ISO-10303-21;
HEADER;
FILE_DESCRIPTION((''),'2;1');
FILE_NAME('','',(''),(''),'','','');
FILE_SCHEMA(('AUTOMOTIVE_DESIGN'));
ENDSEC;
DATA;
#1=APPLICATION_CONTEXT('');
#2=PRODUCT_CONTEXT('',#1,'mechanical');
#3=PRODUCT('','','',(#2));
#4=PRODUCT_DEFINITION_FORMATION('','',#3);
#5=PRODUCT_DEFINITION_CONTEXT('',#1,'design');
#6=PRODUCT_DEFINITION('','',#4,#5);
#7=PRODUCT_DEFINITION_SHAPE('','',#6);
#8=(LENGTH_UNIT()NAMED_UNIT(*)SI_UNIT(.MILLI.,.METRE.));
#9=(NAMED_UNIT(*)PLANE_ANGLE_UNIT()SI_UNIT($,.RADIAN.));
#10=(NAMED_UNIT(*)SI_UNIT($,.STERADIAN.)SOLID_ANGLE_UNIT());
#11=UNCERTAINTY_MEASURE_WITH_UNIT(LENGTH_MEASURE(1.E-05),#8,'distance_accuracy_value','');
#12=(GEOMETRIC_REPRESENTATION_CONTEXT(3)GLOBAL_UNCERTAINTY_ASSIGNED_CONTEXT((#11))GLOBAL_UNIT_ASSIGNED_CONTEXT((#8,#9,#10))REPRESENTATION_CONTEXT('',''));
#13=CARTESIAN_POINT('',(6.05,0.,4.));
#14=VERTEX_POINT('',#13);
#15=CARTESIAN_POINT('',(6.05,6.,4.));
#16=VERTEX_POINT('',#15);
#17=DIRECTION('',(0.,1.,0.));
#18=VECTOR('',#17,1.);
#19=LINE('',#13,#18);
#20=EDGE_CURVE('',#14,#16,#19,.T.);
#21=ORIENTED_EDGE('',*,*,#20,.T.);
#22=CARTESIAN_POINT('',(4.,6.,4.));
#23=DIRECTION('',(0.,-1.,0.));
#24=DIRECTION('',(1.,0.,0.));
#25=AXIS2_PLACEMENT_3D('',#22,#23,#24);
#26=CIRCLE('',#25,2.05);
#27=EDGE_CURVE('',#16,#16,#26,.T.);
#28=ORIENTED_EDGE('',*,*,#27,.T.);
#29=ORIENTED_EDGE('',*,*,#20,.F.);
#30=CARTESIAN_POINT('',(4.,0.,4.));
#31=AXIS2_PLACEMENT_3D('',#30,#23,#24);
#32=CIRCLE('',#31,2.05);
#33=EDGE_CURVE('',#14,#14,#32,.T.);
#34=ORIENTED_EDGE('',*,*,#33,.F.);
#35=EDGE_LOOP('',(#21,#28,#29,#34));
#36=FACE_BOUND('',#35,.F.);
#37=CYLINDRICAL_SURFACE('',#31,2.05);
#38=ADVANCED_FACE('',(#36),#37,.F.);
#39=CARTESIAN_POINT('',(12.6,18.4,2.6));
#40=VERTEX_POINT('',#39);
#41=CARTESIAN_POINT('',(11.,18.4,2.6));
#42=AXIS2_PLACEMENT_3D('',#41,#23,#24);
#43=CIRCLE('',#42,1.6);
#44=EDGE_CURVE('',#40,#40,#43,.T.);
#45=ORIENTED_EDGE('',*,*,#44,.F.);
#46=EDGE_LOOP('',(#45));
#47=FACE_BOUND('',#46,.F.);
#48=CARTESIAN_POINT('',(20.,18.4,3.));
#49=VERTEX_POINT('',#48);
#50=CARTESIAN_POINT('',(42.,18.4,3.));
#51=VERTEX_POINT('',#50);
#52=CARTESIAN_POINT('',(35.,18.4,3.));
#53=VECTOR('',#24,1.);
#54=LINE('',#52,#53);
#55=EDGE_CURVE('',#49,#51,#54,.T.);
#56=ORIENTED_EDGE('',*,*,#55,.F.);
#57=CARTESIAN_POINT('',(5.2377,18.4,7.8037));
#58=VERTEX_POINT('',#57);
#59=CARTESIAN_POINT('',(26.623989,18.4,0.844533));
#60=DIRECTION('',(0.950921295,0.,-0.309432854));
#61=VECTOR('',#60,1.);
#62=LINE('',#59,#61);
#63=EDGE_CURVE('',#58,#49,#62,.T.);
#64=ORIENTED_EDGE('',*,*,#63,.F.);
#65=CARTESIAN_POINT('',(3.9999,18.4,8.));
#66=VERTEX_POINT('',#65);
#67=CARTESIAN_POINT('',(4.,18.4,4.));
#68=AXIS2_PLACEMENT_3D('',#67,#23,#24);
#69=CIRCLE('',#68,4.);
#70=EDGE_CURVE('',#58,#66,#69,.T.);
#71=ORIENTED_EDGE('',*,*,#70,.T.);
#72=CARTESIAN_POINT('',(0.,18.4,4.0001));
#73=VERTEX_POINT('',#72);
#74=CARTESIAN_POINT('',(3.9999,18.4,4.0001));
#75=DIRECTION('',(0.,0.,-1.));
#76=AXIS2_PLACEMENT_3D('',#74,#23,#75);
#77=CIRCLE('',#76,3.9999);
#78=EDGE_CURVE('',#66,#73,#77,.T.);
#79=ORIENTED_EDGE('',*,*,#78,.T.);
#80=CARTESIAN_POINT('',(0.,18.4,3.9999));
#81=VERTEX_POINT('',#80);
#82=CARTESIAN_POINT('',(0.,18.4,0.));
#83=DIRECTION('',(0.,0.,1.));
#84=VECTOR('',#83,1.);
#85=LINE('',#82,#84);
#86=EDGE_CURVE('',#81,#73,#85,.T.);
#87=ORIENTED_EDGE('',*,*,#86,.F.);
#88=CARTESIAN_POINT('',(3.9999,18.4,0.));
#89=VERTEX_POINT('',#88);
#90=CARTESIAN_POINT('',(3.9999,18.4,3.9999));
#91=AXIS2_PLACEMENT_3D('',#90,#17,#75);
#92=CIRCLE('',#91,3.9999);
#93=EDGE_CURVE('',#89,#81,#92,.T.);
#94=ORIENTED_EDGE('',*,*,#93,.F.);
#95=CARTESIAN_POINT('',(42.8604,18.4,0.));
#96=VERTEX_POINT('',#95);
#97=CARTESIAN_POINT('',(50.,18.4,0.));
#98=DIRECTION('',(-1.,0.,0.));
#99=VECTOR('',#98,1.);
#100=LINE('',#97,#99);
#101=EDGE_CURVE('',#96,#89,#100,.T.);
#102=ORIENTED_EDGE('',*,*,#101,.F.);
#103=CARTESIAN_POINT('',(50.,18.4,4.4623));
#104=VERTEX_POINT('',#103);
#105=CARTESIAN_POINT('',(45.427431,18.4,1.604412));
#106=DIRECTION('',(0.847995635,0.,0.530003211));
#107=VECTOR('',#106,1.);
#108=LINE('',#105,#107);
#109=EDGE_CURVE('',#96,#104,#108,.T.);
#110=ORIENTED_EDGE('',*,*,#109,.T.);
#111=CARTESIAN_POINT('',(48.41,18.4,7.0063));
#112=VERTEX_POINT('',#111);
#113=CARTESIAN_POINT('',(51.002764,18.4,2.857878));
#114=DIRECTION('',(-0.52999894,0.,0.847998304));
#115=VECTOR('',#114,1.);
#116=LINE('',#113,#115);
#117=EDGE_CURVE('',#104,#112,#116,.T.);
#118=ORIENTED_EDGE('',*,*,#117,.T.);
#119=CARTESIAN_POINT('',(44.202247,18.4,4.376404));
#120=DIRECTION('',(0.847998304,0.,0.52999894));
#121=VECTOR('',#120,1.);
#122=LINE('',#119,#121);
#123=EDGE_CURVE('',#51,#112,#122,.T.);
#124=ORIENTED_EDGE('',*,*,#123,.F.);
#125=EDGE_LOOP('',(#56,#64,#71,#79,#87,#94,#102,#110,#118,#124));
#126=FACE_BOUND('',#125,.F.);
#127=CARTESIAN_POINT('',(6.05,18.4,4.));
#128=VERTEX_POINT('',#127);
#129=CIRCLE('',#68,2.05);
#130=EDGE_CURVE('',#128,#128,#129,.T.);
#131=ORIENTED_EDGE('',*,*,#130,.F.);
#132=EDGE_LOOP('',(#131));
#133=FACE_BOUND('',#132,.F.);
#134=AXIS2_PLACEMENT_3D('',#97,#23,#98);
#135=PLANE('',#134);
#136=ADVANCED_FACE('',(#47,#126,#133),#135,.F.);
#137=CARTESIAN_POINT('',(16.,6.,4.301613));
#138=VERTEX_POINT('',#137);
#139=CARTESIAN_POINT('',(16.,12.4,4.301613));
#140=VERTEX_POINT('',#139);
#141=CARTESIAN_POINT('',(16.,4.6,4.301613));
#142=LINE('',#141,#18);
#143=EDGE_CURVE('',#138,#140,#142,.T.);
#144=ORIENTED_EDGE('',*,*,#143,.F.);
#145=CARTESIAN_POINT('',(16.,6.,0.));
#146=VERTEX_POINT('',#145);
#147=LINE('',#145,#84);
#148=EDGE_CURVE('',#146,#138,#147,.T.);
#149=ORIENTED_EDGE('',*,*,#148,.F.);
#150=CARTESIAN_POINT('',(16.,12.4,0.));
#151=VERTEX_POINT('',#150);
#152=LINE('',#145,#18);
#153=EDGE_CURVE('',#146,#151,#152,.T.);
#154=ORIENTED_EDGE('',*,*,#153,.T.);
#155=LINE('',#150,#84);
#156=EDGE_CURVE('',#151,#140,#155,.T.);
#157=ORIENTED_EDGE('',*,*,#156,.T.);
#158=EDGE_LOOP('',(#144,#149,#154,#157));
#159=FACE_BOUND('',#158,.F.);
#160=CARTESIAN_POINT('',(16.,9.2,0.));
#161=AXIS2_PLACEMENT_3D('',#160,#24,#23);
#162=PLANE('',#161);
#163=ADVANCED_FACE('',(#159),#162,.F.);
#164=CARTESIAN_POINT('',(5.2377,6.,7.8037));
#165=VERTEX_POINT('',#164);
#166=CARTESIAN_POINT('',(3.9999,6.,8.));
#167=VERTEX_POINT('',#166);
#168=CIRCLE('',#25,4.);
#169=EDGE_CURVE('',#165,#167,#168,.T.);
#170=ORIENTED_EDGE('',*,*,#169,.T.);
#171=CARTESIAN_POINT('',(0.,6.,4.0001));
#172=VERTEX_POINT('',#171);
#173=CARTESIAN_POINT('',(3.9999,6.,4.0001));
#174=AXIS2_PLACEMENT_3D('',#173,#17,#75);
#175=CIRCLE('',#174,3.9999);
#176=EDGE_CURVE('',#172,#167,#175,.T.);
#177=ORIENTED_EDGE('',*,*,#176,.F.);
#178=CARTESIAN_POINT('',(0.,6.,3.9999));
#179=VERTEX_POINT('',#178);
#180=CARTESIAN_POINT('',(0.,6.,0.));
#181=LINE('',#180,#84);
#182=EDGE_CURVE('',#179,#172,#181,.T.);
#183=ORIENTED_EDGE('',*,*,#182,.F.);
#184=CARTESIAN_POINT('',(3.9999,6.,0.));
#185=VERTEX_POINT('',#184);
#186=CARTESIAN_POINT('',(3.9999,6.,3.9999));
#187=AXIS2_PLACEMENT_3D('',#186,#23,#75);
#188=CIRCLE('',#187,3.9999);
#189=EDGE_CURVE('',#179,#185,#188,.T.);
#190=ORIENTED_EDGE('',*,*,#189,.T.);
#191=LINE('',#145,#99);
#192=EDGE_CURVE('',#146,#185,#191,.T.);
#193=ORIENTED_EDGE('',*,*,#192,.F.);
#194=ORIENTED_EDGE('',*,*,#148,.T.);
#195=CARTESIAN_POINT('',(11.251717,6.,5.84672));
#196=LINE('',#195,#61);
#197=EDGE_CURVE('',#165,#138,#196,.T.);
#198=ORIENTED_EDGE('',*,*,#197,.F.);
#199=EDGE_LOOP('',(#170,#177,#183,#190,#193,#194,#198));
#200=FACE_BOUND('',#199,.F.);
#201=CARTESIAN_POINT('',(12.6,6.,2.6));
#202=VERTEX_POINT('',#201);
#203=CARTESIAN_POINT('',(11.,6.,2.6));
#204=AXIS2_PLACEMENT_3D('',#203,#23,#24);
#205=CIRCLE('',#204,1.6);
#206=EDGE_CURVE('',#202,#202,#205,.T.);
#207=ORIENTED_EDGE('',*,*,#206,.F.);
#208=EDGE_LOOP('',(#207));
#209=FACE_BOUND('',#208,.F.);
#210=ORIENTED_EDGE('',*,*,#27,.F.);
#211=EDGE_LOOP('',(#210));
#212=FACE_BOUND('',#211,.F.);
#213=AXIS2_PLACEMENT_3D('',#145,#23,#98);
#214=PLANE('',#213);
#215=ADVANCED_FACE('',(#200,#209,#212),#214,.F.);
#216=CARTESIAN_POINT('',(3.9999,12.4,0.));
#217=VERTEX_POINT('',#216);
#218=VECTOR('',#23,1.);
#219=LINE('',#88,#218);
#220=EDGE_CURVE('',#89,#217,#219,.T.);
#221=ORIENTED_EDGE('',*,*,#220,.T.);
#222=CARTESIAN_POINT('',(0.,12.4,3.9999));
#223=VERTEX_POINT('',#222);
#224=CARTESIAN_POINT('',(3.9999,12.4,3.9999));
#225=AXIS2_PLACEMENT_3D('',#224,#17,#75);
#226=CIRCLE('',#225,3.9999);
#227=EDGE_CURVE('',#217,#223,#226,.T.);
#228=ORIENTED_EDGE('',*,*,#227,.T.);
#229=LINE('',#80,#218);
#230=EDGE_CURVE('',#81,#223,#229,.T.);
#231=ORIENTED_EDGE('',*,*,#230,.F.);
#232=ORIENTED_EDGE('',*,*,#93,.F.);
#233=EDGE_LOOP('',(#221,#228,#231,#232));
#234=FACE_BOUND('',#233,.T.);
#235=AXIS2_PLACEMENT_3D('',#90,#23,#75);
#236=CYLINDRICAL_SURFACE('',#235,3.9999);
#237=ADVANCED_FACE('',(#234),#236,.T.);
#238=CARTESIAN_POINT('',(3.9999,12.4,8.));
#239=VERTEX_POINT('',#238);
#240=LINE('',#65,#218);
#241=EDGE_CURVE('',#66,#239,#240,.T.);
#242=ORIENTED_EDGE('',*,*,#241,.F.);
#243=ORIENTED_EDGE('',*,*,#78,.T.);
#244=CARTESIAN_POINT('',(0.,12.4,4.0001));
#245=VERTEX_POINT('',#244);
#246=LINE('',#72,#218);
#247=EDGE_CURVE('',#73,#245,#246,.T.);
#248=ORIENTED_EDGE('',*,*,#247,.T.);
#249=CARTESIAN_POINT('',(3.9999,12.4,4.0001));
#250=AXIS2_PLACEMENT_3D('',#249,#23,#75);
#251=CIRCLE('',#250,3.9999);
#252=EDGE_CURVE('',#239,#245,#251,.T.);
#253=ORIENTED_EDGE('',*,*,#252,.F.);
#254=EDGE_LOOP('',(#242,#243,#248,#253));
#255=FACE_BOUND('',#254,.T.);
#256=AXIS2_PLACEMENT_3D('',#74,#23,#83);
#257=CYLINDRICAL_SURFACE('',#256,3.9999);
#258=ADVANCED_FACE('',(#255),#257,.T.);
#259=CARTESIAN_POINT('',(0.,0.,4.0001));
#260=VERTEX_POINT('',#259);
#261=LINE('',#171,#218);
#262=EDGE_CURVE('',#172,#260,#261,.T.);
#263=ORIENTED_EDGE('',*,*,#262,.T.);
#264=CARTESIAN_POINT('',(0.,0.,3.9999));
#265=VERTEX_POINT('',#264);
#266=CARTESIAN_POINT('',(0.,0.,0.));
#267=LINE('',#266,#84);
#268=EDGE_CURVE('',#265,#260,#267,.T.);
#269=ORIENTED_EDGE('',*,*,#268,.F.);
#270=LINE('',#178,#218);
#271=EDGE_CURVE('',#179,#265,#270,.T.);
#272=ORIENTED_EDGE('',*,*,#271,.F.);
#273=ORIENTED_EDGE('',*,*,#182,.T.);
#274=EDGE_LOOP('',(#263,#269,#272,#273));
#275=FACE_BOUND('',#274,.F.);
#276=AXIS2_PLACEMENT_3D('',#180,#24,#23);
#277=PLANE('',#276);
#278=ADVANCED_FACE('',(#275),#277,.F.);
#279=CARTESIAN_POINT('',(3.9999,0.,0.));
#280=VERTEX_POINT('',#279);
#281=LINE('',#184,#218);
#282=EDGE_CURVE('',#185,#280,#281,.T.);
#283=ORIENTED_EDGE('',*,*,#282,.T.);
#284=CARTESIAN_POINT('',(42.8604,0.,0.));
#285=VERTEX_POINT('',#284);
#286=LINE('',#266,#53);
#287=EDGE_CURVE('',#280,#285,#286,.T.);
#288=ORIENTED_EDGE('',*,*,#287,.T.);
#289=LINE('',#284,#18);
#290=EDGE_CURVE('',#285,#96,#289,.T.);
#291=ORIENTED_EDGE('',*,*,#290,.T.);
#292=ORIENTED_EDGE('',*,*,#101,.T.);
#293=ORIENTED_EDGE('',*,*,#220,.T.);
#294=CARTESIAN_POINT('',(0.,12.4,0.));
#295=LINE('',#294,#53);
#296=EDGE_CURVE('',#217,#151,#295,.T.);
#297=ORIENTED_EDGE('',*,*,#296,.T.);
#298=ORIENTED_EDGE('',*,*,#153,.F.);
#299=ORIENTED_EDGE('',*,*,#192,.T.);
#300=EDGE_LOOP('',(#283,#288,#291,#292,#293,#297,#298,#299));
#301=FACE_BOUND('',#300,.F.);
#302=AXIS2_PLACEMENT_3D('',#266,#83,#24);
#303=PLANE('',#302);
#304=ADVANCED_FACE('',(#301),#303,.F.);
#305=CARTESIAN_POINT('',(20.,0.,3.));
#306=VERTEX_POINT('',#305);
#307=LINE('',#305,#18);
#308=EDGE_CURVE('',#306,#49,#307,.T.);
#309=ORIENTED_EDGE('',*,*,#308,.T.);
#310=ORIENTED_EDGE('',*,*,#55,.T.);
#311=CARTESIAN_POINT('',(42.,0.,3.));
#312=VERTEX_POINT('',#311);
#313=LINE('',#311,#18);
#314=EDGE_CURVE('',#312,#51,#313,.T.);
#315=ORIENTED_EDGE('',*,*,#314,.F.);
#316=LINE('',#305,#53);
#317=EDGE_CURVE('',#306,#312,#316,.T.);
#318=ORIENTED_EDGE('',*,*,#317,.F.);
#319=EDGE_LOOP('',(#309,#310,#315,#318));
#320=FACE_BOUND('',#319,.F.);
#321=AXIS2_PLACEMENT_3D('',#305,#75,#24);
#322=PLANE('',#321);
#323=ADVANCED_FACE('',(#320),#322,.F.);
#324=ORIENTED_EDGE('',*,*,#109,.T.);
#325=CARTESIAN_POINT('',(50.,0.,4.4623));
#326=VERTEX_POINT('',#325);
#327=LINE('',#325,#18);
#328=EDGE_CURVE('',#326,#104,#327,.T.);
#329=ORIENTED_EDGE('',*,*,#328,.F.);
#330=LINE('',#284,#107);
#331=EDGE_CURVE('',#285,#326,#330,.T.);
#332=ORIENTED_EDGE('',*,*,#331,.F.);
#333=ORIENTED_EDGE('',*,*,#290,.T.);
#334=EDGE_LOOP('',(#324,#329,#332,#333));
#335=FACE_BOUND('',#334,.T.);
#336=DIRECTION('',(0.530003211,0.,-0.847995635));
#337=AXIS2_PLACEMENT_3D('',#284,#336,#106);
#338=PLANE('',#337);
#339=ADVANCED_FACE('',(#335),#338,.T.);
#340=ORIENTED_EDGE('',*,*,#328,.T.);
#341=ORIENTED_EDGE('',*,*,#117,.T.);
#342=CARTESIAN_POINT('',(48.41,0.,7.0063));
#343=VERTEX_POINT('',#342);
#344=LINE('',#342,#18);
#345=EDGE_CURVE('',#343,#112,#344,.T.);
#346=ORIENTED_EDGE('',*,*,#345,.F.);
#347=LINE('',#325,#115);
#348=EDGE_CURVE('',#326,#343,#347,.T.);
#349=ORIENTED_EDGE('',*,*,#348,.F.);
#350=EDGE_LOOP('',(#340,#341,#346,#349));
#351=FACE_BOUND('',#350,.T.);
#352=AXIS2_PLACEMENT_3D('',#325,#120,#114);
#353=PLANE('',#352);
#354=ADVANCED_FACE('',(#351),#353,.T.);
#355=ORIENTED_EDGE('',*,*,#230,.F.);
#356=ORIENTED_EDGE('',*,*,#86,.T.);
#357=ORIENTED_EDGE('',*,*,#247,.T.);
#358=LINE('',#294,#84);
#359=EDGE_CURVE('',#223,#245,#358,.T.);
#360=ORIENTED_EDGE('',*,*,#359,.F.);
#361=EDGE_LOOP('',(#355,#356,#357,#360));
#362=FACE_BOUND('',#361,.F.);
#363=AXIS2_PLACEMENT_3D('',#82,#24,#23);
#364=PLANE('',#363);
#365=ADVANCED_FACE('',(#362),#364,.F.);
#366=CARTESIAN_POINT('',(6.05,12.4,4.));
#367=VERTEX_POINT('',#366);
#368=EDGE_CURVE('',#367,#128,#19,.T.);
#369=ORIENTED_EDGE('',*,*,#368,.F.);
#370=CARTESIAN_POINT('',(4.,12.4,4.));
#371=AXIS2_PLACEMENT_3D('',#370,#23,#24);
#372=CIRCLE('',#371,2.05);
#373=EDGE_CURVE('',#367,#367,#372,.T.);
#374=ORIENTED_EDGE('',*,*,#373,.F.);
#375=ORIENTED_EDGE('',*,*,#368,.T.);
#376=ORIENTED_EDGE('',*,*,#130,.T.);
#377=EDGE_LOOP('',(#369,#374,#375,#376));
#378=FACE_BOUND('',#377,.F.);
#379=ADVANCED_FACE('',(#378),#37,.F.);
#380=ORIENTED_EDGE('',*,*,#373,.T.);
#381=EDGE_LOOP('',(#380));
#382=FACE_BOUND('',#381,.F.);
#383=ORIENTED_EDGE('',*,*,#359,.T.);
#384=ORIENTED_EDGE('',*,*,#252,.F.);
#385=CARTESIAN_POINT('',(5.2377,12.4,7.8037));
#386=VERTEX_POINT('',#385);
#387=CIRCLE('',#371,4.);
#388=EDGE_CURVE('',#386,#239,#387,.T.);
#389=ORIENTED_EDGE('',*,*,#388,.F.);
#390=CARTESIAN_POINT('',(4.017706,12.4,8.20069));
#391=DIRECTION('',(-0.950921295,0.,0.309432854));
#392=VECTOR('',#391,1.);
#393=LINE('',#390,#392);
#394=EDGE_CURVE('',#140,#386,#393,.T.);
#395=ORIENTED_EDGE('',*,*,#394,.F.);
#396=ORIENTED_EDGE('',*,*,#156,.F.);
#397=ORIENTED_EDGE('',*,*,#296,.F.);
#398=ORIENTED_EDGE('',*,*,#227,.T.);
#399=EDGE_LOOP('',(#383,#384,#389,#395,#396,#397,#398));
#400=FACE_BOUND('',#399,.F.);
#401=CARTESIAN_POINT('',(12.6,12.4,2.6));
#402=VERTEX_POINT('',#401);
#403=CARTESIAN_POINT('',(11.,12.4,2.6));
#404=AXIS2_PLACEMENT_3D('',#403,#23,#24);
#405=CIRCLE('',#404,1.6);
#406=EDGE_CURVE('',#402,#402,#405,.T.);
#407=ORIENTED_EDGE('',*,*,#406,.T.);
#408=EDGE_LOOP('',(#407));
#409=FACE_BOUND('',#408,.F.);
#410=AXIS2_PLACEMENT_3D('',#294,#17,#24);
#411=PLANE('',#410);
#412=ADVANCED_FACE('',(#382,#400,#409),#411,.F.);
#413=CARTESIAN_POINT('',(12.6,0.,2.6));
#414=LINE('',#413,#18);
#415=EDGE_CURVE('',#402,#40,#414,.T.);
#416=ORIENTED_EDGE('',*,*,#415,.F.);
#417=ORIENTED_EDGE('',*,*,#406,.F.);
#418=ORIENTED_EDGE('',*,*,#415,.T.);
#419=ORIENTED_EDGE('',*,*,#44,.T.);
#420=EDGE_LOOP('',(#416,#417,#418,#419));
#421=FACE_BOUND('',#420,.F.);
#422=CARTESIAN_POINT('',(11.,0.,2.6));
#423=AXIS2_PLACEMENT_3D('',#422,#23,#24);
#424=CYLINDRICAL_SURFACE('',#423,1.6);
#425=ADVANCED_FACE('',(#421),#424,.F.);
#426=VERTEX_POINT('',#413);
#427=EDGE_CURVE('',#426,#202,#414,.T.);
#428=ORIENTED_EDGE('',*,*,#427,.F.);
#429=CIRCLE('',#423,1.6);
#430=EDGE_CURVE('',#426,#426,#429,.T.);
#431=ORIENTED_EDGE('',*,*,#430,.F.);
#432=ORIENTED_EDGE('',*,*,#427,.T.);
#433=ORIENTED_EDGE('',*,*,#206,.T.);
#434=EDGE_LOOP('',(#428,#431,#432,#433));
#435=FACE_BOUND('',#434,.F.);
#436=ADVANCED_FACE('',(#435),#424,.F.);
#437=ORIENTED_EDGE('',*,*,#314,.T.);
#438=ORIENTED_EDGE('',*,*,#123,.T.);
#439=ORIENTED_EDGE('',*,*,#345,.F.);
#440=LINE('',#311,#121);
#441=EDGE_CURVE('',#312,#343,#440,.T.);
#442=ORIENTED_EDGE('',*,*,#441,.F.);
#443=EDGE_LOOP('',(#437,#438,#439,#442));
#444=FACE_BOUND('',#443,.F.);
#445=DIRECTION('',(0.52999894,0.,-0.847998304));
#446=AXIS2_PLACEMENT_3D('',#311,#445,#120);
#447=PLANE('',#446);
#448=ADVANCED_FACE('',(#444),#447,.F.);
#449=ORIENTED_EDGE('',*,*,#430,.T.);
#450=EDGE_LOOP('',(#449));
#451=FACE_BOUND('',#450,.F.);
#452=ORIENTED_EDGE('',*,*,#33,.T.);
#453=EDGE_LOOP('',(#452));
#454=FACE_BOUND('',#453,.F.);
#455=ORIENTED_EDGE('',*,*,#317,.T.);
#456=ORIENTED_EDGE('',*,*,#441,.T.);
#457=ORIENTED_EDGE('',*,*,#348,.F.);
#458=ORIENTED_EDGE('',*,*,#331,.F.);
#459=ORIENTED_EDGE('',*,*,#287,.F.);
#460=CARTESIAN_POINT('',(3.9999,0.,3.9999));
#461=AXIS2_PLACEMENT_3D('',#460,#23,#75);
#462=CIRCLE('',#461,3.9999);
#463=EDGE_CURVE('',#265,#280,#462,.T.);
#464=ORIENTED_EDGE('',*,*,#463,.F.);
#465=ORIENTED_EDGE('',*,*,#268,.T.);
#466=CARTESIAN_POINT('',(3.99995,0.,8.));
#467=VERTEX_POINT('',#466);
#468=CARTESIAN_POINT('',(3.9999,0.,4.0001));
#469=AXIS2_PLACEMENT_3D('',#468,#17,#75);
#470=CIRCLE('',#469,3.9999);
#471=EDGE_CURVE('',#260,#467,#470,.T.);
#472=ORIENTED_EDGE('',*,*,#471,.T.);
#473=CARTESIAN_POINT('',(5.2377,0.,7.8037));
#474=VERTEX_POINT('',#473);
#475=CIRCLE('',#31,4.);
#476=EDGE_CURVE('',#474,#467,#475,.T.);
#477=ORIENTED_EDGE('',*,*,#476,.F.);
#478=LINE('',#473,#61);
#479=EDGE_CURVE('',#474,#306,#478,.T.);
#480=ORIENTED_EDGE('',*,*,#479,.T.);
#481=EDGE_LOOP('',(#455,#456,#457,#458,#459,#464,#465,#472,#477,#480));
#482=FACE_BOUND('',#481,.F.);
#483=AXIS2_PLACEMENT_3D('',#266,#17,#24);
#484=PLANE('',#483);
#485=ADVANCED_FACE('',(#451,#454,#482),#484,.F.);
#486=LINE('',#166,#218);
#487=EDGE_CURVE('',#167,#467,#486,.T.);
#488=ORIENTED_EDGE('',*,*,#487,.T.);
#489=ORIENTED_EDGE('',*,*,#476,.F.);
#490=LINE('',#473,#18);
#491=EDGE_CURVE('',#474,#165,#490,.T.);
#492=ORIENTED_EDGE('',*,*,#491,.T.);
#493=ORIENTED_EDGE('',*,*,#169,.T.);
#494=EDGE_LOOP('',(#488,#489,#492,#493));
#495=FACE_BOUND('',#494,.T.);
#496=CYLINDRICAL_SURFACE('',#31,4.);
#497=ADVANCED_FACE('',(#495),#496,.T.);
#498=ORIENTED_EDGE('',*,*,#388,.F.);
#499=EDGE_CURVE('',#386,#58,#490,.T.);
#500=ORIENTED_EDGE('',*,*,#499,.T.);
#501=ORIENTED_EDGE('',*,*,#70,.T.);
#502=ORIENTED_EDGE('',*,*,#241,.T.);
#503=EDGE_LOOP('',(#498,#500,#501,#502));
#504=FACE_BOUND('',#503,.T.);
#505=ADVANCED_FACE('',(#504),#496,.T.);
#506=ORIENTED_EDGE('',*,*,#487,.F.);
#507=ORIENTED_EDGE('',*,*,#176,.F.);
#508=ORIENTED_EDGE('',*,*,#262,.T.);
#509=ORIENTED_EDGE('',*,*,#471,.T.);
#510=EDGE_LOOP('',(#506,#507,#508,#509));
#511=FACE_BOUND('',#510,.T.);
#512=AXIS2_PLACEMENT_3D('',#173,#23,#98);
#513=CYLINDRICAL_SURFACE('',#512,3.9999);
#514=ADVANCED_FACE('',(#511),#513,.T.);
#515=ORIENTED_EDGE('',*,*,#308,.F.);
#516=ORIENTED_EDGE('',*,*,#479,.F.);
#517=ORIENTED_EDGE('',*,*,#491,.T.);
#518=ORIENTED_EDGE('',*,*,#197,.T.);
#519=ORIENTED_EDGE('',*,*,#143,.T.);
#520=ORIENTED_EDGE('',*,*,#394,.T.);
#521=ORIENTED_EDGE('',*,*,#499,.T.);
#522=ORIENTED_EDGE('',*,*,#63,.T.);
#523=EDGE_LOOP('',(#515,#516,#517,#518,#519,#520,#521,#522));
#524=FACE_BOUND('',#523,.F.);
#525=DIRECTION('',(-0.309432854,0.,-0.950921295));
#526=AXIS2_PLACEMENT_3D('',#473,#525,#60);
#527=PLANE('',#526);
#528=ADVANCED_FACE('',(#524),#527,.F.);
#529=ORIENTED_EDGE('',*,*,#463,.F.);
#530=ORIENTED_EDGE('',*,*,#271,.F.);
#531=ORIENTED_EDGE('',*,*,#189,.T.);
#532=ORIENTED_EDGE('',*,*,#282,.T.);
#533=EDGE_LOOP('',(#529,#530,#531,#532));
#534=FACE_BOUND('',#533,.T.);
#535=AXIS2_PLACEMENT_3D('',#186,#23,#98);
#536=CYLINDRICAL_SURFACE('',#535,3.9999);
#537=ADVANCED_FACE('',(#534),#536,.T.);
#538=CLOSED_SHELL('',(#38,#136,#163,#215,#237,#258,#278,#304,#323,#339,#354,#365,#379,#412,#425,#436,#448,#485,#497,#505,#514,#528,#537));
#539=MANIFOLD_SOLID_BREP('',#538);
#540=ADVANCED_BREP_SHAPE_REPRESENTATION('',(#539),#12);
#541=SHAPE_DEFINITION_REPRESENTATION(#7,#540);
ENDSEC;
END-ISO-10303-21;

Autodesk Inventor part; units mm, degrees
ref_plane "YZ Plane" through (0, 0, 0) normal (1, 0, 0) x (0, 1, 0)
ref_plane "XZ Plane" through (0, 0, 0) normal (0, 1, 0) x (-1, 0, 0)
ref_plane "XY Plane" through (0, 0, 0) normal (0, 0, 1) x (1, 0, 0)
sketch "Sketch1" plane through (0, 0, 0) normal (0, 0, 1) x (1, 0, 0)
  line L0 (0, 0) -> (50, 0)
  line L1 (50, 0) -> (50, 18.4)
  line L2 (50, 18.4) -> (0, 18.4)
  line L3 (0, 18.4) -> (0, 0)
  line L4 (0, 12.4) -> (16, 12.4)
  line L5 (16, 12.4) -> (16, 6)
  line L6 (16, 6) -> (0, 6)
  line L7 (0, 6) -> (0, 12.4)
  line L8 (58.8783, 9.2) -> (-7.6234, 9.2)
  point P0 (0, 6)
  dimension "d0" = 50
  dimension "d1" = 18.4
  dimension "d11" = 16
  dimension "d13" = 18.4
  dimension "d14" = 6.4
  dimension "d15" = 6.4
extrude "Extrusion1" add sketch "Sketch1" along normal blind 8 contours L3 L6 L5 L8 L1 L0 | L8 L5 L4 L3 L2 L1
fillet "Fillet1" radius 4 4 edges at (0, 3, 8) (0, 3, 0) (0, 15.4, 8) (0, 15.4, 0)
sketch "Sketch3" plane through (50, 0, 0) normal (0, -1, 0) x (1, 0, 0)
  circle A0 centre (-46, 4) radius 2.05
  line L0 (-46, 8) -> (0, 8) projected
  arc A1 (-46, 8) -> (-46, 0) centre (-46, 4) ccw projected
  circle A2 centre (-39, 2.6) radius 1.6
  line L1 (-46, 0) -> (0, 0) projected
  circle A3 centre (-46, 4) radius 4
  line L2 (-44.7623, 7.8037) -> (-30, 3)
  line L3 (-30, 3) -> (-8, 3)
  line L4 (-8, 3) -> (0, 8)
  line L5 (0, 0) -> (0, 8) projected
  line L6 (-7.1396, 0) -> (0, 4.4623)
  line L7 (0, 4.4623) -> (-1.59, 7.0063)
  point P0 (-50, 0)
  point P1 (-50, 4)
  point P2 (-50, 4)
  point P3 (-50, 4)
  point P4 (-4, 5.5)
  dimension "d23" = 8
  dimension "d17" = 4.1
  dimension "d18" = 4
  dimension "d19" = 4
  dimension "d20" = 3.2
  dimension "d21" = 2.6
  dimension "d22" = 11
  dimension "d24" = 20
  dimension "d25" = 8
  dimension "d26" = 5
  dimension "d27" = 3
extrude "Extrusion3" cut sketch "Sketch3" against normal blind 20 contours A0 | L0 L4 L3 L2 A3 | L5 L7 L4 | L5 L1 L6 | A2
properties part number "Lever"
